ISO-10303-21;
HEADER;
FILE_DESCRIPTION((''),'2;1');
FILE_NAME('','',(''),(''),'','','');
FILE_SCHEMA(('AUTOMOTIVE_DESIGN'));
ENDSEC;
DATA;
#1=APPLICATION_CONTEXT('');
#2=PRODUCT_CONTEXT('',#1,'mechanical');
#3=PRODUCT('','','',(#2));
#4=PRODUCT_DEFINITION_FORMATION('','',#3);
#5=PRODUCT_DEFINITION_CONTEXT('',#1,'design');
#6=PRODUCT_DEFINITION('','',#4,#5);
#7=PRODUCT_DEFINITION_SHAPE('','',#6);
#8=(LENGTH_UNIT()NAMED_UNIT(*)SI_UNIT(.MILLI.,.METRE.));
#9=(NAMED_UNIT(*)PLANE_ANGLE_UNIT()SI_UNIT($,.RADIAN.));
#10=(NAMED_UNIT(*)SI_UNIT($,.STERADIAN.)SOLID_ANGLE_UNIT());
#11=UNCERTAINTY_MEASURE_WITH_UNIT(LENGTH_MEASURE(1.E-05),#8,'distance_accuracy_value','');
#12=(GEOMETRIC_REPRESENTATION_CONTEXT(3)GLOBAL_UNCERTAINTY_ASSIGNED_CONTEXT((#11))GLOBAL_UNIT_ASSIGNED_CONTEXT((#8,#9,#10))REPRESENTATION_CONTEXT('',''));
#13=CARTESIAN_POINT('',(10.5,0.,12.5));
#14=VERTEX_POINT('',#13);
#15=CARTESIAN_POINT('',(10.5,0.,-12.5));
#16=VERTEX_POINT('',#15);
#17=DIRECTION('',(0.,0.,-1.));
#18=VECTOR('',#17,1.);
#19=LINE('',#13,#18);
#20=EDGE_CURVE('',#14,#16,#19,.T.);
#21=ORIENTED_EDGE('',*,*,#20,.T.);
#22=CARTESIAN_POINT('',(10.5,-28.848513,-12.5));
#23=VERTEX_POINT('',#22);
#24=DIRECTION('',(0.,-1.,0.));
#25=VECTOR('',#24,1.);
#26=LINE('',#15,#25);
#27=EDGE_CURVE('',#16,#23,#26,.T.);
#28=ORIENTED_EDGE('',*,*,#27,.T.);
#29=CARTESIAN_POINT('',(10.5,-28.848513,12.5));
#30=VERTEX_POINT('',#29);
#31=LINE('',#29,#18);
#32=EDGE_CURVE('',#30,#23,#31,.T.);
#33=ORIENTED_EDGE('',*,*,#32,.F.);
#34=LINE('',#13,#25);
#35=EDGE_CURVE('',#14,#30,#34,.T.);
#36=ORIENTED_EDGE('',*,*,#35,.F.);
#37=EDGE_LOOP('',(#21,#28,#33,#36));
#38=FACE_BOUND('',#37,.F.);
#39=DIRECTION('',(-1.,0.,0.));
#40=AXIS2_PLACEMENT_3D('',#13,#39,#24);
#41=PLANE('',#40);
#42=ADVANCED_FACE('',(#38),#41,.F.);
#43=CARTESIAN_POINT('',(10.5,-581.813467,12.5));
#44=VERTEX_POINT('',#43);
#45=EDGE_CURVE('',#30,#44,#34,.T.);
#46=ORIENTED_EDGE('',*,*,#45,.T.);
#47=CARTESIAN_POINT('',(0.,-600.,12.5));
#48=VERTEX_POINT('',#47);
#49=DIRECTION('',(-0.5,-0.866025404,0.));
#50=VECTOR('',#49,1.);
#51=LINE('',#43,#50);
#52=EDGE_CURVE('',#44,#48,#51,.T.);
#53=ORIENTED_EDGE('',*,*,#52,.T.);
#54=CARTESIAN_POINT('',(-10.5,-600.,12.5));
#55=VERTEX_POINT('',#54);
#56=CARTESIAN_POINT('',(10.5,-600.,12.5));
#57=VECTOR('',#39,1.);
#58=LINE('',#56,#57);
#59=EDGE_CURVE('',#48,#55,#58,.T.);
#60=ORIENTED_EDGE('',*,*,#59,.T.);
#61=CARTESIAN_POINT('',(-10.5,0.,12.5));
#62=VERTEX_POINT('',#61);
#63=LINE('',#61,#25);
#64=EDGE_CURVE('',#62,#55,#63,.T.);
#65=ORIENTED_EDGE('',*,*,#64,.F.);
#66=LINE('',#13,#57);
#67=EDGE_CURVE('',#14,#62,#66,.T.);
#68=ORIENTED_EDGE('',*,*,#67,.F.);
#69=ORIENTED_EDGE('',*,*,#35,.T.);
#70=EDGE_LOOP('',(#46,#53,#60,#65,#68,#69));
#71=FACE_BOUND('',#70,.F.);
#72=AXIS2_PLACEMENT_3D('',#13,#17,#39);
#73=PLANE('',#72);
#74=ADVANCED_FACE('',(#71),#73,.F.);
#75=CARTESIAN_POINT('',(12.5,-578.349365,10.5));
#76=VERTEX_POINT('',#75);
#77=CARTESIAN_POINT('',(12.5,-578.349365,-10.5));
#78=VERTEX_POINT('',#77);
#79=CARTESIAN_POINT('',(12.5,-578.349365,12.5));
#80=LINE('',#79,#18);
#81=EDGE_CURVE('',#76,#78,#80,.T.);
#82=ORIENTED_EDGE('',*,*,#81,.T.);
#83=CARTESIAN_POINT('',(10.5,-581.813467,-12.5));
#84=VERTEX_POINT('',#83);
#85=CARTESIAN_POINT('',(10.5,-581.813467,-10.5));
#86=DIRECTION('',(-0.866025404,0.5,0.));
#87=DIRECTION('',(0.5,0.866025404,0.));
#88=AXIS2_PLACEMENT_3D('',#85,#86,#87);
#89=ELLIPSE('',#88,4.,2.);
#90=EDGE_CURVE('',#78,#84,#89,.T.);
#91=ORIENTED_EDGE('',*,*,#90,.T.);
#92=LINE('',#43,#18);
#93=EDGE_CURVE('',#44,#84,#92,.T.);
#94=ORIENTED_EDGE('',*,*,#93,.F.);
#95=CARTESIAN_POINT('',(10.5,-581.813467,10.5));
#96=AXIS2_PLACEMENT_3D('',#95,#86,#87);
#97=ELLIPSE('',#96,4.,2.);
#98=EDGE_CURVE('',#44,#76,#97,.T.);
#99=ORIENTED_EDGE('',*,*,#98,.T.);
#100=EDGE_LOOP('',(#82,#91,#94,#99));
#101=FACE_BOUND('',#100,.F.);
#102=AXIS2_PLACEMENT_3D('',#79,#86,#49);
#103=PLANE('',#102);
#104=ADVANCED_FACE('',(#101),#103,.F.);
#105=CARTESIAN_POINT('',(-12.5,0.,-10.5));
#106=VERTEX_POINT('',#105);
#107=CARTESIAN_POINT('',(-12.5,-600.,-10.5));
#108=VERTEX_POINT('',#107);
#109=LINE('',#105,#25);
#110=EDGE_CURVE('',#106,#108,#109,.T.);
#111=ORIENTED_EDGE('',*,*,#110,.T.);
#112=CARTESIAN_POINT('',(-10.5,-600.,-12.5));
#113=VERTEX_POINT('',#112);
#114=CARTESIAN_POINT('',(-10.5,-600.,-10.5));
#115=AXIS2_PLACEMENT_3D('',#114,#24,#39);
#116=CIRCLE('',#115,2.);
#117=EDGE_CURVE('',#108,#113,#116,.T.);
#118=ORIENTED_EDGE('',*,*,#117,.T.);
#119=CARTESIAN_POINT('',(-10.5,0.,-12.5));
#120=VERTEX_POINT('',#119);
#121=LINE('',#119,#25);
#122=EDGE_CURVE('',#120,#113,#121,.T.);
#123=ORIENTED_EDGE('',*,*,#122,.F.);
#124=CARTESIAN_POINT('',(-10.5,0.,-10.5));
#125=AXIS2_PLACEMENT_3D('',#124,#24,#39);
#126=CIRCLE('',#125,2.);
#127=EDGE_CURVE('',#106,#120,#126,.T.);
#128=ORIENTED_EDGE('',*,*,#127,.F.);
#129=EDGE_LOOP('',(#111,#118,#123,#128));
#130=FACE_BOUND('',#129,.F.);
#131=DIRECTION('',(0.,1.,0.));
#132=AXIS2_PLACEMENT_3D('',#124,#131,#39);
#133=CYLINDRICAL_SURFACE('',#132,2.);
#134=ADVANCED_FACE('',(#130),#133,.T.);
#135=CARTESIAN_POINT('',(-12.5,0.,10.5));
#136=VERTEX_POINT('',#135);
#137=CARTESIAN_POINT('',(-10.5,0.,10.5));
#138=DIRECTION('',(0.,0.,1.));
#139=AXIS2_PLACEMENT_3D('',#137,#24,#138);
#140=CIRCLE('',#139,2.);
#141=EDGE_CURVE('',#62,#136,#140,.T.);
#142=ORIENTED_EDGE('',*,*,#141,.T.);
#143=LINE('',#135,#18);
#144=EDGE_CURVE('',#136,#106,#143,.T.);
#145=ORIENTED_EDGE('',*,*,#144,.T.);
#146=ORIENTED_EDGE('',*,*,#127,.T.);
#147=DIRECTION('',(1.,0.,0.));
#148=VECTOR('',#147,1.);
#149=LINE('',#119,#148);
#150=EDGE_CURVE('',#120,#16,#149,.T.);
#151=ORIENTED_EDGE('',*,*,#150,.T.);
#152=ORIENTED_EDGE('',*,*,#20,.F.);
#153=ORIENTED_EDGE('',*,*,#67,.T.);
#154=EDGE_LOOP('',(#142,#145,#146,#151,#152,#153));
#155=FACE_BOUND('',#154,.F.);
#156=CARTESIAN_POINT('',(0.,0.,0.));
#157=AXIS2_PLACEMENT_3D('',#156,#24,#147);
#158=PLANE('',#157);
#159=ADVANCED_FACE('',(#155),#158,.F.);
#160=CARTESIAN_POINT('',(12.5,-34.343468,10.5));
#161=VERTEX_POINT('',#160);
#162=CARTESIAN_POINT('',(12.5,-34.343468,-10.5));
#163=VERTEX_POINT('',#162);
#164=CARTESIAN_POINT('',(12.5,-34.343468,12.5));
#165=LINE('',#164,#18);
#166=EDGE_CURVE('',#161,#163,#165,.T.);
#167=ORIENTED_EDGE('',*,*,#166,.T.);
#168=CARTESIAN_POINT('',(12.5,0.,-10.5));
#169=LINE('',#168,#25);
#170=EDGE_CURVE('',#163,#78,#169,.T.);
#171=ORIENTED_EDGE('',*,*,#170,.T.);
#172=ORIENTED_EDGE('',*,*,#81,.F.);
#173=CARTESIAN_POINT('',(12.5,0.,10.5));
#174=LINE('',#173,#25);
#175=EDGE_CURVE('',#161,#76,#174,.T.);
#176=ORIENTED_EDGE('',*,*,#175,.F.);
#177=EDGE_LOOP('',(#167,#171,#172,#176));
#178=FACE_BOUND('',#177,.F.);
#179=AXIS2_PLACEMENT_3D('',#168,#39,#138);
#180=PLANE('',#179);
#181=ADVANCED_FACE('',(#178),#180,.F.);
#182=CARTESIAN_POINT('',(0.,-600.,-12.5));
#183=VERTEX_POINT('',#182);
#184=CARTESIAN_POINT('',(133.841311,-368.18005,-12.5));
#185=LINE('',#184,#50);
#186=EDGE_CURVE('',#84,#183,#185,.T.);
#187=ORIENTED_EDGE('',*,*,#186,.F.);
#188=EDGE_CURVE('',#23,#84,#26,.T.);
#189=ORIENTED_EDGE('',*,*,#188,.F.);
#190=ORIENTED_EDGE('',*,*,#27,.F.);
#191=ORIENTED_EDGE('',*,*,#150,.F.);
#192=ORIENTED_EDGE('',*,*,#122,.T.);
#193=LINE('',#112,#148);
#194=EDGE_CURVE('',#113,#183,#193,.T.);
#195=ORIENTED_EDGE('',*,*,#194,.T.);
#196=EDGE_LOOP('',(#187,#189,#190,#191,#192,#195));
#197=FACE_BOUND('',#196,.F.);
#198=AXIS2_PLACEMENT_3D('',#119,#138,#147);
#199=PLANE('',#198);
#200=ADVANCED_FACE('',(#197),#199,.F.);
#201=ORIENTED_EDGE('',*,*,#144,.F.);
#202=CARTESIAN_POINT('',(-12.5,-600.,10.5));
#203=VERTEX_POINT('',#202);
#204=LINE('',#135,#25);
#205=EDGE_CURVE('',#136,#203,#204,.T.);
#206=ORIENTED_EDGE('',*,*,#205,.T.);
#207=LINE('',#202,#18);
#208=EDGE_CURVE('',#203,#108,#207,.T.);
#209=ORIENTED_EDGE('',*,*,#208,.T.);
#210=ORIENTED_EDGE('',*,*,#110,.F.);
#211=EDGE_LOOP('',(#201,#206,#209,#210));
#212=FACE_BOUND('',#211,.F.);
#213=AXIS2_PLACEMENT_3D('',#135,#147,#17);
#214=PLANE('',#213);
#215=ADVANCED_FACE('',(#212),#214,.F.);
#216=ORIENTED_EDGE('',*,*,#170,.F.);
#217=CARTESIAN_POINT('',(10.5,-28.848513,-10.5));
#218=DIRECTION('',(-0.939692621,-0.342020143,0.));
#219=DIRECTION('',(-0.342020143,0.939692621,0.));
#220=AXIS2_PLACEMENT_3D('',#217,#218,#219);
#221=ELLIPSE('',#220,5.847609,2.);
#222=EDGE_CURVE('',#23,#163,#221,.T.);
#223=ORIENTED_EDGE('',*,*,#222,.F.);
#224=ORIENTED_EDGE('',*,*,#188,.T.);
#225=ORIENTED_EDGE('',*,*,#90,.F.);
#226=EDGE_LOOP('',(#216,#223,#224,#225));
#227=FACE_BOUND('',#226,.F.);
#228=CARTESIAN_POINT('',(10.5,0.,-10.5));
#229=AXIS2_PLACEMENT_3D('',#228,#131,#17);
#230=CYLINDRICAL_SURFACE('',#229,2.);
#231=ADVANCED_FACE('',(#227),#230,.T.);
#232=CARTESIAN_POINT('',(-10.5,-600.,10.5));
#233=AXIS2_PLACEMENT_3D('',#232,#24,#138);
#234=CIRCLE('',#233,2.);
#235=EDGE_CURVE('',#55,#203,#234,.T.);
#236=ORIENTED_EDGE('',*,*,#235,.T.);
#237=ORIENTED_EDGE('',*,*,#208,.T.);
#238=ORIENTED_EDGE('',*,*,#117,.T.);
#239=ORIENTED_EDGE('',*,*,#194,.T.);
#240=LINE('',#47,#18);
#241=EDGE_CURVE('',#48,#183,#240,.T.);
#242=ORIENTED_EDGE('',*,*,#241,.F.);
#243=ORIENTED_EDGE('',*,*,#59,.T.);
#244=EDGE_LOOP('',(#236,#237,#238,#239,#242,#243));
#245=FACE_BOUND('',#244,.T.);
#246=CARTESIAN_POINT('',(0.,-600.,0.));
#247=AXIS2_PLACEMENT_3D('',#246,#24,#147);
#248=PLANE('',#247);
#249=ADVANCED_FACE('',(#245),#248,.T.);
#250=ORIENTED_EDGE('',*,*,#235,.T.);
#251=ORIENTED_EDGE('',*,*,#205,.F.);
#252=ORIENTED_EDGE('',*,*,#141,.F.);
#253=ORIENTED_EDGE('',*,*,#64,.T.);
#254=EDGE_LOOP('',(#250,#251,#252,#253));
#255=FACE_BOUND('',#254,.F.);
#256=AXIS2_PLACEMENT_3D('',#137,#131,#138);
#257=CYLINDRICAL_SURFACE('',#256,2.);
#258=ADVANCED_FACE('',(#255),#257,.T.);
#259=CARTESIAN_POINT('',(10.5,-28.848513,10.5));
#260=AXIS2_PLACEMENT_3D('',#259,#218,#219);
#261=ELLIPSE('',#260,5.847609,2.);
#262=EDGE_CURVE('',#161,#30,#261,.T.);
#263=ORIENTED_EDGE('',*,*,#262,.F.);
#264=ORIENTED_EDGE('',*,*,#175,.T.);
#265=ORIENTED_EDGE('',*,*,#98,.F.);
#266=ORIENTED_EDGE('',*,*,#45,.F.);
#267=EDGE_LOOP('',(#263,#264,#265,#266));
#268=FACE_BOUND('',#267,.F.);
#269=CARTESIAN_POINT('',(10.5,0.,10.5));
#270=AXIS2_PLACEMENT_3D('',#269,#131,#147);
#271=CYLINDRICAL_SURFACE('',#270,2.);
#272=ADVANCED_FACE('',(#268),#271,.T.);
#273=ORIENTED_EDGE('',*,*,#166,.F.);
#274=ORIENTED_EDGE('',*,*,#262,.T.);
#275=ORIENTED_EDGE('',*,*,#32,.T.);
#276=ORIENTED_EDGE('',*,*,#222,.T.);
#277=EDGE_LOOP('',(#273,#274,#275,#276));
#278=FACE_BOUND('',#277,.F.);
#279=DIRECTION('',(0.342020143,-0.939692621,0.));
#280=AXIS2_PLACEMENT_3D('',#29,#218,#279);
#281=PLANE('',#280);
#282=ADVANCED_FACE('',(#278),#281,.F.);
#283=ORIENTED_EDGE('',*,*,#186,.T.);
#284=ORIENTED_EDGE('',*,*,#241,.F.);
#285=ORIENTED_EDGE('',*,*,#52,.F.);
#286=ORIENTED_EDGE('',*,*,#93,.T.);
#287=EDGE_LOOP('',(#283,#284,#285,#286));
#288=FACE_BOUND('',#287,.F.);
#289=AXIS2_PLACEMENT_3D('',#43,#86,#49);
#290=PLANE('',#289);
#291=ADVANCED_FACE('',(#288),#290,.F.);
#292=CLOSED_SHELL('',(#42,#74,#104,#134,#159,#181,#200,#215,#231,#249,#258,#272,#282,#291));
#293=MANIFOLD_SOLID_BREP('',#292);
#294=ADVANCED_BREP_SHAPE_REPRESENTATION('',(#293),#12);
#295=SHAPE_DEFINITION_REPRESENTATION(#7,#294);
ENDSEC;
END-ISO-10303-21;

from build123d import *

# Parameters (mm, degrees)
F1_DEPTH = 600
F3_DEPTH = 25.001


with BuildPart() as f1:
    # F0 (on Front) → F1 (new body)
    with BuildSketch(Plane.XZ):
        with BuildLine():
            ThreePointArc((12.5, 10.5), (11.9142135624, 11.9142135624), (10.5, 12.5))
            Line((10.5, 12.5), (-10.5, 12.5))
            ThreePointArc((-10.5, 12.5), (-11.9142135624, 11.9142135624), (-12.5, 10.5))
            Line((-12.5, 10.5), (-12.5, -10.5))
            ThreePointArc((-12.5, -10.5), (-11.9142135624, -11.9142135624), (-10.5, -12.5))
            Line((-10.5, -12.5), (10.5, -12.5))
            ThreePointArc((10.5, -12.5), (11.9142135624, -11.9142135624), (12.5, -10.5))
            Line((12.5, -10.5), (12.5, 10.5))
        make_face()
    extrude(amount=F1_DEPTH)

    # F2 (on face) → F3 (cut, through all)
    with BuildSketch(Plane.XY.offset(12.5)):
        Polygon((12.5, -34.3434677432), (12.5, 0), (10.5, 0), (10.5, -28.8485129043), align=None)
        Polygon((10.5, -600), (10.5, -581.8134665205), (0, -600), align=None)
        Polygon((12.5, -578.3493649054), (10.5, -581.8134665205), (10.5, -600), (12.5, -600), align=None)
    extrude(amount=-F3_DEPTH, mode=Mode.SUBTRACT)


solid = f1.part
